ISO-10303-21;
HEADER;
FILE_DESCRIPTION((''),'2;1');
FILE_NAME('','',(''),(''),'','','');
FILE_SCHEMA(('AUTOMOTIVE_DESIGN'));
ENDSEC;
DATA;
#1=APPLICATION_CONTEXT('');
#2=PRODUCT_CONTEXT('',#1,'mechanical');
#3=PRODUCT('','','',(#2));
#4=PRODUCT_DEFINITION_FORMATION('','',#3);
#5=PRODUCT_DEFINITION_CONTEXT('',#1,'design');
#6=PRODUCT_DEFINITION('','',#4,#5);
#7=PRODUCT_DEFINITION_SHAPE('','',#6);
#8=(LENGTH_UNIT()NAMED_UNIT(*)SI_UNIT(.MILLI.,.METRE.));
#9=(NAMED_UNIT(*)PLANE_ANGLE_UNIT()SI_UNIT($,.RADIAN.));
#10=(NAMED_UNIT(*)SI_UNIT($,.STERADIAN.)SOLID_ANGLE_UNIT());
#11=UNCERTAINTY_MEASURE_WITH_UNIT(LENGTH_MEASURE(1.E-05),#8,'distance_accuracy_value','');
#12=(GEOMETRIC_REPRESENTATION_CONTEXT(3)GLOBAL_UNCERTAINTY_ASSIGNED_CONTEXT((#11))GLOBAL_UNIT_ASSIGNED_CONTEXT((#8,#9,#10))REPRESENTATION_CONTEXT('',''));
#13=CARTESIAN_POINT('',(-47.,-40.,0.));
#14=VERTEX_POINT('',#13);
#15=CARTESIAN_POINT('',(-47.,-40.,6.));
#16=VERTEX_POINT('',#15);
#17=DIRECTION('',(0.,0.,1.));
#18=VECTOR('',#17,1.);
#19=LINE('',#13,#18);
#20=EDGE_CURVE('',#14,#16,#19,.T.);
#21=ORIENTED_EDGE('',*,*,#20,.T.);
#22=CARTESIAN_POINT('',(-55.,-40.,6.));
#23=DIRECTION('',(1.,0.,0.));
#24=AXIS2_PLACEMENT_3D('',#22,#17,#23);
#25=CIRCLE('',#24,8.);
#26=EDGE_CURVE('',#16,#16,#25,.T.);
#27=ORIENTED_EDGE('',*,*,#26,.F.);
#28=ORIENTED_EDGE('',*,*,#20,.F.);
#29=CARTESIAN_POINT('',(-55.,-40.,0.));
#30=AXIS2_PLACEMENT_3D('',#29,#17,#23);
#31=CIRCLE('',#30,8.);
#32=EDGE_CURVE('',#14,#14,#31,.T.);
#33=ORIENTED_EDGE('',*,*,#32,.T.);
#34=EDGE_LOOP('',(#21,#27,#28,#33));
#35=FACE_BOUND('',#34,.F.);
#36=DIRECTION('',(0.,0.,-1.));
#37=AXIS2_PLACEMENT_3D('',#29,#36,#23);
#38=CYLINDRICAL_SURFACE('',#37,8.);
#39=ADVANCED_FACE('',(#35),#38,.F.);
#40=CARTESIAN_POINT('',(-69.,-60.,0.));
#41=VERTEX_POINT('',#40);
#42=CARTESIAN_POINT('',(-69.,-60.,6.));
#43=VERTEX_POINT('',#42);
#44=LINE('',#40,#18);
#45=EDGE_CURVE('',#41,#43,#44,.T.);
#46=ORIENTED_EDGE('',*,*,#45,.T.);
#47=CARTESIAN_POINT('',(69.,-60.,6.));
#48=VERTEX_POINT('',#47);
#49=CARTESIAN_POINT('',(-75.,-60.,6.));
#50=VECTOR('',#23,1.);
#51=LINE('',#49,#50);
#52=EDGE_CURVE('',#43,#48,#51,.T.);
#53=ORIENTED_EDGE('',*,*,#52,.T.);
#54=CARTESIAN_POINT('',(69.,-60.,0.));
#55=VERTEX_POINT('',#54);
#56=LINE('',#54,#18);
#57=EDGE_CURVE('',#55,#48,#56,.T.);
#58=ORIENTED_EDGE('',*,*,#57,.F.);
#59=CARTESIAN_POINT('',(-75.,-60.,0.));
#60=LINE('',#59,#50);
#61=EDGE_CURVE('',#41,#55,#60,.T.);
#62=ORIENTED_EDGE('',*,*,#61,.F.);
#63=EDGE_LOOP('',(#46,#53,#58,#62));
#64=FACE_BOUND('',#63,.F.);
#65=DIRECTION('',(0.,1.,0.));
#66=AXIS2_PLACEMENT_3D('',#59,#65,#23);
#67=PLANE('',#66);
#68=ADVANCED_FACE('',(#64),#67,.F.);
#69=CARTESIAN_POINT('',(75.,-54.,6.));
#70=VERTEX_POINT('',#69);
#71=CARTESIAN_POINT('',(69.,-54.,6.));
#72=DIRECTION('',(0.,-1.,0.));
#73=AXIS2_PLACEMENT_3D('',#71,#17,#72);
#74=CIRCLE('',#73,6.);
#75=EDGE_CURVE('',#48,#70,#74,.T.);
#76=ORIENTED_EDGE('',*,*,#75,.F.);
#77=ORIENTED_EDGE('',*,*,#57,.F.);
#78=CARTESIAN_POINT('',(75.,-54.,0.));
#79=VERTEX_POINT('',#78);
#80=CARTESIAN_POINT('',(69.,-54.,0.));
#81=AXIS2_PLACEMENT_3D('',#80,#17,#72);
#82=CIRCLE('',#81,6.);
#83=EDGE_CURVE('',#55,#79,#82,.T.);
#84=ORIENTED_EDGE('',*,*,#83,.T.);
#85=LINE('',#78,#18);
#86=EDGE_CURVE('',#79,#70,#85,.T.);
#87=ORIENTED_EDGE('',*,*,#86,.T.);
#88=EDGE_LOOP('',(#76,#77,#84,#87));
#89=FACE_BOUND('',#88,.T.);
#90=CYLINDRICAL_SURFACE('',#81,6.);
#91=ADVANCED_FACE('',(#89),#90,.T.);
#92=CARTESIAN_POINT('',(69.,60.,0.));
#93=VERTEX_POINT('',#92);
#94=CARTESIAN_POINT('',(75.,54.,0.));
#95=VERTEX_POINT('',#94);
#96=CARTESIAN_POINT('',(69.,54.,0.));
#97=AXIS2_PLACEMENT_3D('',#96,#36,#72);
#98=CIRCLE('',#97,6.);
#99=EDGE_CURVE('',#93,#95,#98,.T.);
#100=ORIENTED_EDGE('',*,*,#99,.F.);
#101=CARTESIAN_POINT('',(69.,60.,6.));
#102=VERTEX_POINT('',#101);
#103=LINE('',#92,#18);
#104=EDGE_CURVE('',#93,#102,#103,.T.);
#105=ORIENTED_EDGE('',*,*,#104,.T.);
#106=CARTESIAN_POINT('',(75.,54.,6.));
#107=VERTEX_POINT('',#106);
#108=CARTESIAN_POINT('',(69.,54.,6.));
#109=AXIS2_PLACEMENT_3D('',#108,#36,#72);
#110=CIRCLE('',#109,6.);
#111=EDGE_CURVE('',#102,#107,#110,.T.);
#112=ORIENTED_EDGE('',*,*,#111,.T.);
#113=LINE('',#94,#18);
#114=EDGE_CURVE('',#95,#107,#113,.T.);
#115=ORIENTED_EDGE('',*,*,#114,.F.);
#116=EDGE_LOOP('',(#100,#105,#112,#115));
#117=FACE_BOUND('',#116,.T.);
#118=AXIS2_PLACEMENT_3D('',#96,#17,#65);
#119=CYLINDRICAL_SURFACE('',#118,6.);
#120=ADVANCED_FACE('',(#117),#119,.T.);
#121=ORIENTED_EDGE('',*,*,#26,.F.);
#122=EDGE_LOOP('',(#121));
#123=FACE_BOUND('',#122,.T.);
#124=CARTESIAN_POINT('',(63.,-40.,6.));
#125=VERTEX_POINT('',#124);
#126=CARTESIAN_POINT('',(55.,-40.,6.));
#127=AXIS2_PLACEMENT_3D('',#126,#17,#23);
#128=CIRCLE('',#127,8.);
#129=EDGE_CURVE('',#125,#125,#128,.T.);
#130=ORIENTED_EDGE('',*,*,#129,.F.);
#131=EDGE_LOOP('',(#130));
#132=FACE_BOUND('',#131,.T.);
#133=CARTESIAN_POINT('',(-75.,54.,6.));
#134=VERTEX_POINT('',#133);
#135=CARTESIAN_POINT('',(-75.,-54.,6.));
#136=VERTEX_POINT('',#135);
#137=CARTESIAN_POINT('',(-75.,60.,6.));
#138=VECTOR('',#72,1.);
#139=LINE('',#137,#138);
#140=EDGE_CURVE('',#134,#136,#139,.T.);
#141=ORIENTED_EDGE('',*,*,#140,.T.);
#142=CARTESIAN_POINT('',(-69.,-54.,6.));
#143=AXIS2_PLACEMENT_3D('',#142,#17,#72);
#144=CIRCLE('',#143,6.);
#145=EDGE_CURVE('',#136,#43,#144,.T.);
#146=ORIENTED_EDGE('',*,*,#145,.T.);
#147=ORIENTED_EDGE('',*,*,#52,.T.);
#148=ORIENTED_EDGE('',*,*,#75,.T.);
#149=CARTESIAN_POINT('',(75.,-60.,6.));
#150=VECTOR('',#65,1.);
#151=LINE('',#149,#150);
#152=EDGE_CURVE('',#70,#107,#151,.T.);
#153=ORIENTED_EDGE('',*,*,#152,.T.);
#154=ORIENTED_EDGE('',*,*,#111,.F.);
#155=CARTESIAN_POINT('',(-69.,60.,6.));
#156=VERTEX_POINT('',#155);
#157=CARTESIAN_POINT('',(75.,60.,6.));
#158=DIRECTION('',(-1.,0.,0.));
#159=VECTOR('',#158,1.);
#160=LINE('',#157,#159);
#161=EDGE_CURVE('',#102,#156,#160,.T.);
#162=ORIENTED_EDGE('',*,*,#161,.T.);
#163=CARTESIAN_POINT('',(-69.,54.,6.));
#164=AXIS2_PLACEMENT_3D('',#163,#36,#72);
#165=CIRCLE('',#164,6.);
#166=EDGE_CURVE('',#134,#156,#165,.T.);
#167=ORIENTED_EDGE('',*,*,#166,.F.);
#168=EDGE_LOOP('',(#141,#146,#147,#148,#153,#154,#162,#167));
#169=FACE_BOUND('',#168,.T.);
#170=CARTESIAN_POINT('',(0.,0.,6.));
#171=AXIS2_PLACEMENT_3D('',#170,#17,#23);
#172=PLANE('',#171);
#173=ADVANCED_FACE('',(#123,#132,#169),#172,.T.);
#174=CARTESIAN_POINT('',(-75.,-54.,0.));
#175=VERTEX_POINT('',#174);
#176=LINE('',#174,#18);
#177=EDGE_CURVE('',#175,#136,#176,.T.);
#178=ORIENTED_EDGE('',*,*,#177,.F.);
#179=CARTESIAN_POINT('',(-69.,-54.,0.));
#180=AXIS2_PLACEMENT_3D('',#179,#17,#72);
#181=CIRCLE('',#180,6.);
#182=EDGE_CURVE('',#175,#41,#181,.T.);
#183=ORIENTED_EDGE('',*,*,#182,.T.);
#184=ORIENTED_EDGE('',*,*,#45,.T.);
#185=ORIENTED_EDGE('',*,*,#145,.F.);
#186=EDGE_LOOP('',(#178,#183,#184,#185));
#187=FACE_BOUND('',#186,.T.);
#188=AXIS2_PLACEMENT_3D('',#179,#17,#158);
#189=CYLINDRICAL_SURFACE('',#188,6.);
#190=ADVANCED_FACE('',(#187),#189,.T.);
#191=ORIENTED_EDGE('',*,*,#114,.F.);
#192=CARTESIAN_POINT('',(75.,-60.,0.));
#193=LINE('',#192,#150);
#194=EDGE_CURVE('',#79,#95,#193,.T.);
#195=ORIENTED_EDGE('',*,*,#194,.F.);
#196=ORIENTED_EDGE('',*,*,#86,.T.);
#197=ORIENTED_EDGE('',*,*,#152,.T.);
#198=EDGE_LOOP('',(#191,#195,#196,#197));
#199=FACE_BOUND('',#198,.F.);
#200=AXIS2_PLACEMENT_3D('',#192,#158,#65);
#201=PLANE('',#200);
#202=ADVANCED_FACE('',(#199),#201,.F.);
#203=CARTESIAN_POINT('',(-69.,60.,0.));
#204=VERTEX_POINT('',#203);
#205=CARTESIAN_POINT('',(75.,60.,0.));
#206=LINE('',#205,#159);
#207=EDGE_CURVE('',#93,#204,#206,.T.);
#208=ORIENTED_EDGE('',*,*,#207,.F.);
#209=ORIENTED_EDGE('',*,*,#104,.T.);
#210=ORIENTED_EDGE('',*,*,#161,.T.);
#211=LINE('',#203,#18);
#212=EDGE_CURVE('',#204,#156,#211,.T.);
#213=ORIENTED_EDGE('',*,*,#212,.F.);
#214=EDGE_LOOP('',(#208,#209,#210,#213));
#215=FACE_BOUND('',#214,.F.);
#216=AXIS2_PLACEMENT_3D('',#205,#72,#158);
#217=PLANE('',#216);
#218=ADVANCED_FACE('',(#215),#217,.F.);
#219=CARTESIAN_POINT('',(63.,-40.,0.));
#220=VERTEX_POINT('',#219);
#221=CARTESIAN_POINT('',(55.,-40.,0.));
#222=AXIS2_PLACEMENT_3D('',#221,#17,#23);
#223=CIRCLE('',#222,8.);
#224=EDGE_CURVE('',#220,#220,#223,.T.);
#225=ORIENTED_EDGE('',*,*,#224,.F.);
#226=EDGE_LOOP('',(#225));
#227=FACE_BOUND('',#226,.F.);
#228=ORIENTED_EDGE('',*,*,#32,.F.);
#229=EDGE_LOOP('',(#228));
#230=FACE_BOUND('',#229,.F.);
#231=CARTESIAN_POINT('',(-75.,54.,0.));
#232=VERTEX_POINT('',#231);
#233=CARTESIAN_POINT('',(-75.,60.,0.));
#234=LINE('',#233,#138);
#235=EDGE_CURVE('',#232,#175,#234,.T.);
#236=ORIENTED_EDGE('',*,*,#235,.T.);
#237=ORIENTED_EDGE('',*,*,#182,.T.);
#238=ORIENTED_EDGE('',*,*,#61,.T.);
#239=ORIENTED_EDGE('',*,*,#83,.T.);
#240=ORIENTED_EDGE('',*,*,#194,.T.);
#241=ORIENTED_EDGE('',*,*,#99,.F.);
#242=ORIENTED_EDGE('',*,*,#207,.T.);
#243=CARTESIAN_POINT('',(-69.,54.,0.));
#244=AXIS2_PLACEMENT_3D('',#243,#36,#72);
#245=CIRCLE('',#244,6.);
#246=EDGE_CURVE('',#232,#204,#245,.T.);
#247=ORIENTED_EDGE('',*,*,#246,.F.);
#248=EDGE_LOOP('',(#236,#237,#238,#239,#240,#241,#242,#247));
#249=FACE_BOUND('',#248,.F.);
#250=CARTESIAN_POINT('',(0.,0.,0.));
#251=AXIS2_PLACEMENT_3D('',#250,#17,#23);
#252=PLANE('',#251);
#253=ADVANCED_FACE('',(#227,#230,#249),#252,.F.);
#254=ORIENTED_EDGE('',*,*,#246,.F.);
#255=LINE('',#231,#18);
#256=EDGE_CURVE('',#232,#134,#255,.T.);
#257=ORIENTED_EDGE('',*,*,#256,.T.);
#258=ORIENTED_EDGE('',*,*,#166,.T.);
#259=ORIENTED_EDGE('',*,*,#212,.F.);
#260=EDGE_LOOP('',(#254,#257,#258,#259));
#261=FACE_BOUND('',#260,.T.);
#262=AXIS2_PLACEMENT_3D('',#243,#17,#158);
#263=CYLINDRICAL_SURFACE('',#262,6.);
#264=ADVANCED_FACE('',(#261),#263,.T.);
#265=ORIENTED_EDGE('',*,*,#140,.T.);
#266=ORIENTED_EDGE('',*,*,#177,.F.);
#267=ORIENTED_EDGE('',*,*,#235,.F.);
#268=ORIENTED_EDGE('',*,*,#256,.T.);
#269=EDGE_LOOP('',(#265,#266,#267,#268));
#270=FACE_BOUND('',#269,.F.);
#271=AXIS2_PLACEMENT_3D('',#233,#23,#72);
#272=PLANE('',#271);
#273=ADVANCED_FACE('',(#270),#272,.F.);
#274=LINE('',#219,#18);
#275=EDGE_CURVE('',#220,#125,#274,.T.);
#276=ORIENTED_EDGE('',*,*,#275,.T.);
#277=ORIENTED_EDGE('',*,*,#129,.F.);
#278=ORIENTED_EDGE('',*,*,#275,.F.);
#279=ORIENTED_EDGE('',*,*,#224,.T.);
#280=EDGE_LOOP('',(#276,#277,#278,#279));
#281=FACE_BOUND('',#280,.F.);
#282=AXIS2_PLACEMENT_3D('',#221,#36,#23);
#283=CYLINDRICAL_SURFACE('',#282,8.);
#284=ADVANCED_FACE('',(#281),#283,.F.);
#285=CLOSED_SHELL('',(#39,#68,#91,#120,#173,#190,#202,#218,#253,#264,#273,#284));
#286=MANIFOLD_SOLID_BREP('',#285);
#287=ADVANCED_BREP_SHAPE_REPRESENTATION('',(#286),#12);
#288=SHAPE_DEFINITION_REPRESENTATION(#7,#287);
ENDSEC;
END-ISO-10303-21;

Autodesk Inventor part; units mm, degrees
ref_plane "YZ Plane" through (0, 0, 0) normal (1, 0, 0) x (0, 1, 0)
ref_plane "XZ Plane" through (0, 0, 0) normal (0, 1, 0) x (-1, 0, 0)
ref_plane "XY Plane" through (0, 0, 0) normal (0, 0, 1) x (1, 0, 0)
sketch "Sketch1" plane through (0, 0, 0) normal (0, 0, 1) x (1, 0, 0)
  line L0 (-75, -60) -> (75, -60)
  line L1 (75, -60) -> (75, 60)
  line L2 (75, 60) -> (-75, 60)
  line L3 (-75, 60) -> (-75, -60)
  line L4 (-75, -60) -> (75, 60) construction
  line L5 (75, -60) -> (-75, 60) construction
  circle A0 centre (-55, 40) radius 8
  circle A1 centre (-55, -40) radius 8
  circle A2 centre (55, 40) radius 8
  circle A3 centre (55, -40) radius 8
  line L6 (0, 60) -> (0, -60) construction
  line L7 (-75, 0) -> (75, 0) construction
  point P0 (0, 0)
  dimension "d154" = 150
  dimension "d155" = 120
  dimension "d157" = 20
  dimension "d158" = 20
  dimension "d159" = 16
extrude "Plate5" add sketch "Sketch1" along normal blind 6 contours L3 L2 L1 L0 | A0 | A2
fillet "Corner Round1" radius 6 4 edges at (-75, -60, 3) (75, -60, 3) (75, 60, 3) (-75, 60, 3)
properties part number "NDM-VOS pillar 2 plate 1" material "Steel"
